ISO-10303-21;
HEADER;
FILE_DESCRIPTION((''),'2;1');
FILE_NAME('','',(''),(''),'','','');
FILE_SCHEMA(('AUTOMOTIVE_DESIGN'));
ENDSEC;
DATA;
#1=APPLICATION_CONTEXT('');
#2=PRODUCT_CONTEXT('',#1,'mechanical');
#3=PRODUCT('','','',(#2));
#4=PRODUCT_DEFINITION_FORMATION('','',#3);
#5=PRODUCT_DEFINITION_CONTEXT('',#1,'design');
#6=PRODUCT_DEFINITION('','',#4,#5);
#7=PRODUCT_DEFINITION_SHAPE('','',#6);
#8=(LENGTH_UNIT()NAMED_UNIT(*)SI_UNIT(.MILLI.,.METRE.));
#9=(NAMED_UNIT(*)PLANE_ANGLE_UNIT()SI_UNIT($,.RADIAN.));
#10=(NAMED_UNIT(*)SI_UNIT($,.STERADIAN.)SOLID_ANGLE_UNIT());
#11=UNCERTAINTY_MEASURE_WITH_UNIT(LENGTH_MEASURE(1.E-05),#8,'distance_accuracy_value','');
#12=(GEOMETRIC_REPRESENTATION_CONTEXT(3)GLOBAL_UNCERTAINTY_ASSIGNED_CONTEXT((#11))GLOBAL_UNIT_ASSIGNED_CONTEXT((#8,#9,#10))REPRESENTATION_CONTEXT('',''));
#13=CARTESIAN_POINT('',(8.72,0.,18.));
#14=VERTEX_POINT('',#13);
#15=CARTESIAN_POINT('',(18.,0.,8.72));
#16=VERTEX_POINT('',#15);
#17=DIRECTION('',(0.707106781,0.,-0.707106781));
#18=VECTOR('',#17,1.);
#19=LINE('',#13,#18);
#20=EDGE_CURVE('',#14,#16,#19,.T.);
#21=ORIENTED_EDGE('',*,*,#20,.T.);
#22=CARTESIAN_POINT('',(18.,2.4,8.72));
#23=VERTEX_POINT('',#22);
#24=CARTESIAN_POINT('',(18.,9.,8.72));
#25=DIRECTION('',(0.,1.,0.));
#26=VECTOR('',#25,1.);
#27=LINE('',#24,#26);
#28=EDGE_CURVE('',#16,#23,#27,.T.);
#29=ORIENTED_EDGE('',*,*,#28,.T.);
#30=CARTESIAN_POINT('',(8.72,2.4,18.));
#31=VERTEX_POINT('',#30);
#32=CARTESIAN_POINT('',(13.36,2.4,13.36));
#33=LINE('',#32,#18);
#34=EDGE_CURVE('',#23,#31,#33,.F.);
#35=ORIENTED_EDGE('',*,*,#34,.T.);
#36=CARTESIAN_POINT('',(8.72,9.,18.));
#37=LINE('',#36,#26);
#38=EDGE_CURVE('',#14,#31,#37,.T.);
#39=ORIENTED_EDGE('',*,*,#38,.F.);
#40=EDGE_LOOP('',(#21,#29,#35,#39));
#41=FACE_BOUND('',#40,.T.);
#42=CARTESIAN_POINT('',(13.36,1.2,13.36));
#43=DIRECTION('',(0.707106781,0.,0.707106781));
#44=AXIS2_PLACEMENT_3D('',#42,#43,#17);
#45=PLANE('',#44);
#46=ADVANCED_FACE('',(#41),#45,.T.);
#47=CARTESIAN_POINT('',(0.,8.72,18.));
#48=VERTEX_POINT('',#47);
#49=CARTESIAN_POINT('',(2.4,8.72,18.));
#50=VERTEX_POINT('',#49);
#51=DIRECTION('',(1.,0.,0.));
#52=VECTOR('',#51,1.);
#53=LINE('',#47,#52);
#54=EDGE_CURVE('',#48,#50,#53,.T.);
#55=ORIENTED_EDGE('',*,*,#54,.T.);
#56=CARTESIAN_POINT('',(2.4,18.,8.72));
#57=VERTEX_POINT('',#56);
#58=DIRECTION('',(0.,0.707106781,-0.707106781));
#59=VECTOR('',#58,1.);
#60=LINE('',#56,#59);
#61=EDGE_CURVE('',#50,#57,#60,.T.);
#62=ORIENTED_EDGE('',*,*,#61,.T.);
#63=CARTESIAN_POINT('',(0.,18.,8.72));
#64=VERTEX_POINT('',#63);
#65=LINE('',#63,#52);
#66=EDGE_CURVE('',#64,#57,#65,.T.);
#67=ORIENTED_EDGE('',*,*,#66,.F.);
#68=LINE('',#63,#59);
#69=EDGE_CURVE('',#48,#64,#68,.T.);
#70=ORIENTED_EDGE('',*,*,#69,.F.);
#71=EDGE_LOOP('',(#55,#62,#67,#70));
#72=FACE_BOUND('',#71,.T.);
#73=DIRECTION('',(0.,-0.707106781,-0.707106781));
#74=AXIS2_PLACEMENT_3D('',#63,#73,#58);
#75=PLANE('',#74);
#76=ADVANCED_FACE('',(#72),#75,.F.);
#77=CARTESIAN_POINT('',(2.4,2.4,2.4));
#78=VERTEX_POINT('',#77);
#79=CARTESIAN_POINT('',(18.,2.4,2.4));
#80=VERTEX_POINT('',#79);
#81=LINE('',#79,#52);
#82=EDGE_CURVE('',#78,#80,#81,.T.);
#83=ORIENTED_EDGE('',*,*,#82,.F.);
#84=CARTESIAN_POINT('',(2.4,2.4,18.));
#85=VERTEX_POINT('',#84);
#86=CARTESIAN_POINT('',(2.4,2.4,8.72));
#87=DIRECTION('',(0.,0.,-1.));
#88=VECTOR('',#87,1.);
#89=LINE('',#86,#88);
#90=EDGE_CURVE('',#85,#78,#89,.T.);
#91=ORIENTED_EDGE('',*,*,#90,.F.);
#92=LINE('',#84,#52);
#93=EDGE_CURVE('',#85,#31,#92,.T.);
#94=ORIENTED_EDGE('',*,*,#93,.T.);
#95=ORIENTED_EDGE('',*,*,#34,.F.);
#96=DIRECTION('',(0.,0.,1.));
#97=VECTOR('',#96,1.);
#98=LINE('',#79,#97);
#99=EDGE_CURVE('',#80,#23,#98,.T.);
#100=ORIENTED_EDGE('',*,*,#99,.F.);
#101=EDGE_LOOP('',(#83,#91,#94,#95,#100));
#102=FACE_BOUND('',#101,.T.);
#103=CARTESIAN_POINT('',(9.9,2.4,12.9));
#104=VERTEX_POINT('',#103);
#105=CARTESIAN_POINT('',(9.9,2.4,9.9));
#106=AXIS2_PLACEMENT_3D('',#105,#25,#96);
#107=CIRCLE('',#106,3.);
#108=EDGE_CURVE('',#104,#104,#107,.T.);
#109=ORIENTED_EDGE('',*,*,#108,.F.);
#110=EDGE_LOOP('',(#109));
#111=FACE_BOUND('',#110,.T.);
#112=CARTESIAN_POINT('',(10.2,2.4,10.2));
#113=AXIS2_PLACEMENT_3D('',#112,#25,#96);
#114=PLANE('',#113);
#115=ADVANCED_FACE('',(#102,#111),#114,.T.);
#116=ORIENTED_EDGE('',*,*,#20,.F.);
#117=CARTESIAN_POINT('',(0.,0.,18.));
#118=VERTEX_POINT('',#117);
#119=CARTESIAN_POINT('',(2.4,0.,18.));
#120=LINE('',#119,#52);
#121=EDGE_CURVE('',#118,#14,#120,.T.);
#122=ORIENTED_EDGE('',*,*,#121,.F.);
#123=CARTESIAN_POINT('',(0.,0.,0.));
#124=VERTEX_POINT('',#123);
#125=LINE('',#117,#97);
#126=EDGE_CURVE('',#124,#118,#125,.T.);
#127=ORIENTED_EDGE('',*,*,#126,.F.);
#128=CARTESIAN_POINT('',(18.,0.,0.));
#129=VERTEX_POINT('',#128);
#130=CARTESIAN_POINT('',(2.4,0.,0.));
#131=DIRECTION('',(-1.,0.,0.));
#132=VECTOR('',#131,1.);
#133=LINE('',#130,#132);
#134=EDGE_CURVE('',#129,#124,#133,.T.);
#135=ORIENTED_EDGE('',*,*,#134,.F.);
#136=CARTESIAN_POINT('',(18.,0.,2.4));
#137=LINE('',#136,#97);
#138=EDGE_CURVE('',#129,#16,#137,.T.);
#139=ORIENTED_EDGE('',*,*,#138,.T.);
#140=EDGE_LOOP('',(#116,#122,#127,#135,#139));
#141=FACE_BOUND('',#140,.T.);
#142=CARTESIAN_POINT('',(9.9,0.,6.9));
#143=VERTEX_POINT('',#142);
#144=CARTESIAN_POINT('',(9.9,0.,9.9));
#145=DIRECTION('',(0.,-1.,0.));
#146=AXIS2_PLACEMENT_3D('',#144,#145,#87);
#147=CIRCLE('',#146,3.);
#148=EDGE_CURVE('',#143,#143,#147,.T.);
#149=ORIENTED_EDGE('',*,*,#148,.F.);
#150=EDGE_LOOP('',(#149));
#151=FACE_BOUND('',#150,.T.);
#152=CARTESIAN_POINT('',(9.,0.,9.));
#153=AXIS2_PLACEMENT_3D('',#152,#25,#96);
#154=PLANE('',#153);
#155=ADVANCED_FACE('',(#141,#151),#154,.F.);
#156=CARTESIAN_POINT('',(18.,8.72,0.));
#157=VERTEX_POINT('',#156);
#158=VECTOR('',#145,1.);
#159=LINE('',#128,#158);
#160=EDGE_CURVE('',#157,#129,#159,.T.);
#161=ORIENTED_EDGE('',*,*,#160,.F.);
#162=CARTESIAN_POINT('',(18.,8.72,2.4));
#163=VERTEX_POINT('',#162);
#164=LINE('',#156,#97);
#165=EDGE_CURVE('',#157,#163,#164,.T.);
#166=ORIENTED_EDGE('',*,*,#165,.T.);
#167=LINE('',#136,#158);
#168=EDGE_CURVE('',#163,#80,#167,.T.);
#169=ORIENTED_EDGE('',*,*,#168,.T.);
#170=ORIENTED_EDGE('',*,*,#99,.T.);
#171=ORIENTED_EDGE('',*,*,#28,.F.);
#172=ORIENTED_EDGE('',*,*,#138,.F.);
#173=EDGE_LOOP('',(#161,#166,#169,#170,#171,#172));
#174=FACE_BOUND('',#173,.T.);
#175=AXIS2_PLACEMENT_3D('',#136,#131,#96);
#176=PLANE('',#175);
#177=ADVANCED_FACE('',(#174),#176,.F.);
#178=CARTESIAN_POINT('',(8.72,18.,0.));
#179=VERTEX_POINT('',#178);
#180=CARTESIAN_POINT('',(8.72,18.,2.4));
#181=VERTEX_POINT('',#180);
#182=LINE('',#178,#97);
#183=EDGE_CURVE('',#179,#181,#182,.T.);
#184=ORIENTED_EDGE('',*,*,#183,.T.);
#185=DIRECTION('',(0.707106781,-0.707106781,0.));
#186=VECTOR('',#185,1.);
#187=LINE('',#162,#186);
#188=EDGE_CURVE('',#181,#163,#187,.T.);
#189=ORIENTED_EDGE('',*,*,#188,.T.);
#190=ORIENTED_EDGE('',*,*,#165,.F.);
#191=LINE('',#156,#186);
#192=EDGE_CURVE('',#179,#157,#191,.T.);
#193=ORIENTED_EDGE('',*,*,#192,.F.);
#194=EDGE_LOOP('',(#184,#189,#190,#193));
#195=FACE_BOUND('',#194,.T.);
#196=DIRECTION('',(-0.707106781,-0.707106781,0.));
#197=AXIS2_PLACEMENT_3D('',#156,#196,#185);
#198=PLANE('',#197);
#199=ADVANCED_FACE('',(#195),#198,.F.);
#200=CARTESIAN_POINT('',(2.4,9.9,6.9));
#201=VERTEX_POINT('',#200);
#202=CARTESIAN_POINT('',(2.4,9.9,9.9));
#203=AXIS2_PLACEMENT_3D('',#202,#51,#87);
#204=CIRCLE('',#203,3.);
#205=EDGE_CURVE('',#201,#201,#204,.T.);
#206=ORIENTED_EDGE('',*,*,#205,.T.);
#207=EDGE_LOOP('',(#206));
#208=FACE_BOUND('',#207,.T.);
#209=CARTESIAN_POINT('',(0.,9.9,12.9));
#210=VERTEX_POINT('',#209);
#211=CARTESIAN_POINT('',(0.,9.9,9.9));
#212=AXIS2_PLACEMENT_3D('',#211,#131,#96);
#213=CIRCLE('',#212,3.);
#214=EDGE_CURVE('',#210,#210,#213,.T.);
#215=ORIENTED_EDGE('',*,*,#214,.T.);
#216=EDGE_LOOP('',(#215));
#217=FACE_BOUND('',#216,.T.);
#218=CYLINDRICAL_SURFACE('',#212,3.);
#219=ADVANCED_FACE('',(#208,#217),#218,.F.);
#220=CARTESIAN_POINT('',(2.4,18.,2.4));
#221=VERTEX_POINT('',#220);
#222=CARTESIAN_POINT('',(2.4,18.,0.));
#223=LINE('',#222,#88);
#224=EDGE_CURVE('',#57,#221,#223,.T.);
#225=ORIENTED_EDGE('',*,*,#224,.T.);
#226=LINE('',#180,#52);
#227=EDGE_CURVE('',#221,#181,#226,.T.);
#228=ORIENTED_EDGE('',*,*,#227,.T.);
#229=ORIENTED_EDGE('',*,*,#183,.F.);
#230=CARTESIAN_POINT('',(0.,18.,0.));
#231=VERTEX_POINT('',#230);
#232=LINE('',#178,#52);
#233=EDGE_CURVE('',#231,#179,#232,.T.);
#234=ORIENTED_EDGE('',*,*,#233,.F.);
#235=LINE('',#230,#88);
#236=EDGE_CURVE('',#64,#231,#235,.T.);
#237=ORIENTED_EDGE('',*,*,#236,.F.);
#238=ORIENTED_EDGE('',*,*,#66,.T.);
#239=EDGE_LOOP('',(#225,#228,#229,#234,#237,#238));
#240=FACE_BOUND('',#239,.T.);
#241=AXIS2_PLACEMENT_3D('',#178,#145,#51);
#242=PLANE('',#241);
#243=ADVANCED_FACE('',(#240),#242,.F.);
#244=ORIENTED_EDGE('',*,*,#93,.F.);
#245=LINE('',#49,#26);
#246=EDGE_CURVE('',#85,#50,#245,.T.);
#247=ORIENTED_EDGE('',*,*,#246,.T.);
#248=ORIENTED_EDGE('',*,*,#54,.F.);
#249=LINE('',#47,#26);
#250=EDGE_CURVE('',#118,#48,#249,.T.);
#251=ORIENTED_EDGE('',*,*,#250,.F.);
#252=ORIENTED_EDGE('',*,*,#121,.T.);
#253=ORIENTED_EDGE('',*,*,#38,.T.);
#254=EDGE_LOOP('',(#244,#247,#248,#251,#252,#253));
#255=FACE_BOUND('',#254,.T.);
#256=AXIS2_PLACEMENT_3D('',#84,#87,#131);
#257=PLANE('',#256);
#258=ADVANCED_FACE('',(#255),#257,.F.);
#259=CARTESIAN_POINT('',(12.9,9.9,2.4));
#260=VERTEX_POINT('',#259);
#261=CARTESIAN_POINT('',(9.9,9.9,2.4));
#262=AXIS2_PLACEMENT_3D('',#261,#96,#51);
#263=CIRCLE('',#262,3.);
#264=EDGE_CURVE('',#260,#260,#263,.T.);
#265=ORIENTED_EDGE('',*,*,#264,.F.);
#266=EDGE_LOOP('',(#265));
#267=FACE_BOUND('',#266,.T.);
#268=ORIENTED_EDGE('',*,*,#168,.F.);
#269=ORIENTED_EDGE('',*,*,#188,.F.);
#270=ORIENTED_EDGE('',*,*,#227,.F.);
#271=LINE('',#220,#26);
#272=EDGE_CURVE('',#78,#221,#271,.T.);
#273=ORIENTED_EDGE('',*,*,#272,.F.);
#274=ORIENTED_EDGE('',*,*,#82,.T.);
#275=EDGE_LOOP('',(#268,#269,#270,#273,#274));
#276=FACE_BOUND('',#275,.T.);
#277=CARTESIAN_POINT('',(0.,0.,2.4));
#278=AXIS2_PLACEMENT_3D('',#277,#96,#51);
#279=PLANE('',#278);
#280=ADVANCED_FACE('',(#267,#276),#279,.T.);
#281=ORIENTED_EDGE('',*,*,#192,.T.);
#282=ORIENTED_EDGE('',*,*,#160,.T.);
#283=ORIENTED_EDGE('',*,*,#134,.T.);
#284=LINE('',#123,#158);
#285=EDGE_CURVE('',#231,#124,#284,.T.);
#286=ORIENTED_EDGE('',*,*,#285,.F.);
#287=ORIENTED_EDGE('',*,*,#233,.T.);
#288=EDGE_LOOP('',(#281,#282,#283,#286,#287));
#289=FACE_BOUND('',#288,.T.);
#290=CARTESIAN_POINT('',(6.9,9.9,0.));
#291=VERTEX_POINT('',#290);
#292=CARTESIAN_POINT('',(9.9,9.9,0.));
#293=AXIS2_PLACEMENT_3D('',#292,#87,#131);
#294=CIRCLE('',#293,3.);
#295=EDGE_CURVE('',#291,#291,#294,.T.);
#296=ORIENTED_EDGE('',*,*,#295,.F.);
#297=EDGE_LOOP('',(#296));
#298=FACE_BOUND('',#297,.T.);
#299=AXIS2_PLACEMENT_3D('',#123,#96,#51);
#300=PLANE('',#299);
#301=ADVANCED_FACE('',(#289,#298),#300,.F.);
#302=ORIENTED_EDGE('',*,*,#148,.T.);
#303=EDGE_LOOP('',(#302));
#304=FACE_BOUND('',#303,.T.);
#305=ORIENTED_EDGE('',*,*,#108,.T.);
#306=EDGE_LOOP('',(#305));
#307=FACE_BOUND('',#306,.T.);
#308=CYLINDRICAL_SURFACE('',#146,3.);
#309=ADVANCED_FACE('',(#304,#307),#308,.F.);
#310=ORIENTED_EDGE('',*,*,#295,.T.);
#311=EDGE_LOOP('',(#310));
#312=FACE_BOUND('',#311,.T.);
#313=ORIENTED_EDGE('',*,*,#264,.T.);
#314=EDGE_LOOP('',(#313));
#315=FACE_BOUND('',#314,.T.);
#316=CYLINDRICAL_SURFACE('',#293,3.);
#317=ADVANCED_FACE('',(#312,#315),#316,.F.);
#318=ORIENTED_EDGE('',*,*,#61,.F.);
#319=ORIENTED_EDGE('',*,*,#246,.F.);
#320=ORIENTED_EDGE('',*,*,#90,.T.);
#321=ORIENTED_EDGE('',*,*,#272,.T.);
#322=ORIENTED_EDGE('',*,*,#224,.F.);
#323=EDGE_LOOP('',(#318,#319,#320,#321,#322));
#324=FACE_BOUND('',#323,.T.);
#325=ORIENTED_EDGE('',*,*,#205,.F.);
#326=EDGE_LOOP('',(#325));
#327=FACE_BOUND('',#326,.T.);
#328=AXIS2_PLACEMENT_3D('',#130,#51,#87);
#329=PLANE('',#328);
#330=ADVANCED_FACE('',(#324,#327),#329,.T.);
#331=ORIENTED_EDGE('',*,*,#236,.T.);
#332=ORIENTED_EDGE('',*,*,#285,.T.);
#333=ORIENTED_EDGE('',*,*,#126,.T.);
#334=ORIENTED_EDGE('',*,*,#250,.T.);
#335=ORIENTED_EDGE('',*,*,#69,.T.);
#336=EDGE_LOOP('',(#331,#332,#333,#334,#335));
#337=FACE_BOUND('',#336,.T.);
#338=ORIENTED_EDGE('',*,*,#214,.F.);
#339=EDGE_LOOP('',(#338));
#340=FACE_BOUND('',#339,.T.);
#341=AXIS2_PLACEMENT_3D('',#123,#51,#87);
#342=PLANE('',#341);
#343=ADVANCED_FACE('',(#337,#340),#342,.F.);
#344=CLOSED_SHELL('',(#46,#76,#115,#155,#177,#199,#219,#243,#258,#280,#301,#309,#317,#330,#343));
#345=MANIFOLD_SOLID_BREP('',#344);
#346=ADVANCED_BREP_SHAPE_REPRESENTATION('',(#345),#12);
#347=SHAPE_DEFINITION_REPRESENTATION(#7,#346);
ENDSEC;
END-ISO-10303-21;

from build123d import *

# Parameters (mm, degrees)
BOSS_EXTRUDE1_DEPTH          = 2.4
SKETCH2_W                    = 15.6
SKETCH2_H                    = 2.4
BOSS_EXTRUDE2_DEPTH          = 6.32
BOSS_EXTRUDE3_DEPTH          = 2.4
BOSS_EXTRUDE4_DEPTH          = 2.4
F_6_0_6_DIAMETER_HOLE1_D     = 6
F_6_0_6_DIAMETER_HOLE1_DEPTH = 18.00005
F_6_0_6_DIAMETER_HOLE2_D     = 6
F_6_0_6_DIAMETER_HOLE2_DEPTH = 18.00005
F_6_0_6_DIAMETER_HOLE3_D     = 6
F_6_0_6_DIAMETER_HOLE3_DEPTH = 18.00005


with BuildPart() as part:
    # Boss-Extrude1: read off the stored shape, not the designer's step
    # Boss-Extrude1 outline → Boss-Extrude1 (new body)
    with BuildSketch(Plane(origin=(0, 0, 0), x_dir=(1, 0, 0), z_dir=(0, 1, 0))):
        Polygon((2.4, -18), (8.72, -18), (18, -8.72), (2.4, -8.72), align=None)
    extrude(amount=BOSS_EXTRUDE1_DEPTH)

    # Sketch2 → Boss-Extrude2 (add)
    with BuildSketch(Plane(origin=(0, 0, 8.72), x_dir=(-1, 0, 0), z_dir=(0, 0, -1))):
        with Locations((-10.2, 1.2)):
            Rectangle(SKETCH2_W, SKETCH2_H)
    extrude(amount=BOSS_EXTRUDE2_DEPTH)

    # Sketch3 → Boss-Extrude3 (add)
    with BuildSketch(Plane(origin=(0, 0, 2.4), x_dir=(-1, 0, 0), z_dir=(0, 0, -1))):
        Polygon((-2.4, 0), (-18, 0), (-18, 8.72), (-8.72, 18), (-2.4, 18), align=None)
    extrude(amount=BOSS_EXTRUDE3_DEPTH)

    # Sketch4 → Boss-Extrude4 (add)
    with BuildSketch(Plane.ZY.offset(-2.4)):
        Polygon((0, 18), (8.72, 18), (18, 8.72), (18, 0), (0, 0), align=None)
    extrude(amount=BOSS_EXTRUDE4_DEPTH)

    # Ø6.0 (6) Diameter Hole1
    with Locations(Plane.ZY):
        with Locations((9.9, 9.9)):
            Hole(F_6_0_6_DIAMETER_HOLE1_D / 2, depth=F_6_0_6_DIAMETER_HOLE1_DEPTH)

    # Ø6.0 (6) Diameter Hole2
    with Locations(Plane(origin=(0, 0, 0), x_dir=(-1, 0, 0), z_dir=(0, 0, -1))):
        with Locations((-9.9, 9.9)):
            Hole(F_6_0_6_DIAMETER_HOLE2_D / 2, depth=F_6_0_6_DIAMETER_HOLE2_DEPTH)

    # Ø6.0 (6) Diameter Hole3
    with Locations(Plane(origin=(0, 0, 0), x_dir=(-1, 0, 0), z_dir=(0, -1, 0))):
        with Locations((-9.9, -9.9)):
            Hole(F_6_0_6_DIAMETER_HOLE3_D / 2, depth=F_6_0_6_DIAMETER_HOLE3_DEPTH)


solid = part.part
